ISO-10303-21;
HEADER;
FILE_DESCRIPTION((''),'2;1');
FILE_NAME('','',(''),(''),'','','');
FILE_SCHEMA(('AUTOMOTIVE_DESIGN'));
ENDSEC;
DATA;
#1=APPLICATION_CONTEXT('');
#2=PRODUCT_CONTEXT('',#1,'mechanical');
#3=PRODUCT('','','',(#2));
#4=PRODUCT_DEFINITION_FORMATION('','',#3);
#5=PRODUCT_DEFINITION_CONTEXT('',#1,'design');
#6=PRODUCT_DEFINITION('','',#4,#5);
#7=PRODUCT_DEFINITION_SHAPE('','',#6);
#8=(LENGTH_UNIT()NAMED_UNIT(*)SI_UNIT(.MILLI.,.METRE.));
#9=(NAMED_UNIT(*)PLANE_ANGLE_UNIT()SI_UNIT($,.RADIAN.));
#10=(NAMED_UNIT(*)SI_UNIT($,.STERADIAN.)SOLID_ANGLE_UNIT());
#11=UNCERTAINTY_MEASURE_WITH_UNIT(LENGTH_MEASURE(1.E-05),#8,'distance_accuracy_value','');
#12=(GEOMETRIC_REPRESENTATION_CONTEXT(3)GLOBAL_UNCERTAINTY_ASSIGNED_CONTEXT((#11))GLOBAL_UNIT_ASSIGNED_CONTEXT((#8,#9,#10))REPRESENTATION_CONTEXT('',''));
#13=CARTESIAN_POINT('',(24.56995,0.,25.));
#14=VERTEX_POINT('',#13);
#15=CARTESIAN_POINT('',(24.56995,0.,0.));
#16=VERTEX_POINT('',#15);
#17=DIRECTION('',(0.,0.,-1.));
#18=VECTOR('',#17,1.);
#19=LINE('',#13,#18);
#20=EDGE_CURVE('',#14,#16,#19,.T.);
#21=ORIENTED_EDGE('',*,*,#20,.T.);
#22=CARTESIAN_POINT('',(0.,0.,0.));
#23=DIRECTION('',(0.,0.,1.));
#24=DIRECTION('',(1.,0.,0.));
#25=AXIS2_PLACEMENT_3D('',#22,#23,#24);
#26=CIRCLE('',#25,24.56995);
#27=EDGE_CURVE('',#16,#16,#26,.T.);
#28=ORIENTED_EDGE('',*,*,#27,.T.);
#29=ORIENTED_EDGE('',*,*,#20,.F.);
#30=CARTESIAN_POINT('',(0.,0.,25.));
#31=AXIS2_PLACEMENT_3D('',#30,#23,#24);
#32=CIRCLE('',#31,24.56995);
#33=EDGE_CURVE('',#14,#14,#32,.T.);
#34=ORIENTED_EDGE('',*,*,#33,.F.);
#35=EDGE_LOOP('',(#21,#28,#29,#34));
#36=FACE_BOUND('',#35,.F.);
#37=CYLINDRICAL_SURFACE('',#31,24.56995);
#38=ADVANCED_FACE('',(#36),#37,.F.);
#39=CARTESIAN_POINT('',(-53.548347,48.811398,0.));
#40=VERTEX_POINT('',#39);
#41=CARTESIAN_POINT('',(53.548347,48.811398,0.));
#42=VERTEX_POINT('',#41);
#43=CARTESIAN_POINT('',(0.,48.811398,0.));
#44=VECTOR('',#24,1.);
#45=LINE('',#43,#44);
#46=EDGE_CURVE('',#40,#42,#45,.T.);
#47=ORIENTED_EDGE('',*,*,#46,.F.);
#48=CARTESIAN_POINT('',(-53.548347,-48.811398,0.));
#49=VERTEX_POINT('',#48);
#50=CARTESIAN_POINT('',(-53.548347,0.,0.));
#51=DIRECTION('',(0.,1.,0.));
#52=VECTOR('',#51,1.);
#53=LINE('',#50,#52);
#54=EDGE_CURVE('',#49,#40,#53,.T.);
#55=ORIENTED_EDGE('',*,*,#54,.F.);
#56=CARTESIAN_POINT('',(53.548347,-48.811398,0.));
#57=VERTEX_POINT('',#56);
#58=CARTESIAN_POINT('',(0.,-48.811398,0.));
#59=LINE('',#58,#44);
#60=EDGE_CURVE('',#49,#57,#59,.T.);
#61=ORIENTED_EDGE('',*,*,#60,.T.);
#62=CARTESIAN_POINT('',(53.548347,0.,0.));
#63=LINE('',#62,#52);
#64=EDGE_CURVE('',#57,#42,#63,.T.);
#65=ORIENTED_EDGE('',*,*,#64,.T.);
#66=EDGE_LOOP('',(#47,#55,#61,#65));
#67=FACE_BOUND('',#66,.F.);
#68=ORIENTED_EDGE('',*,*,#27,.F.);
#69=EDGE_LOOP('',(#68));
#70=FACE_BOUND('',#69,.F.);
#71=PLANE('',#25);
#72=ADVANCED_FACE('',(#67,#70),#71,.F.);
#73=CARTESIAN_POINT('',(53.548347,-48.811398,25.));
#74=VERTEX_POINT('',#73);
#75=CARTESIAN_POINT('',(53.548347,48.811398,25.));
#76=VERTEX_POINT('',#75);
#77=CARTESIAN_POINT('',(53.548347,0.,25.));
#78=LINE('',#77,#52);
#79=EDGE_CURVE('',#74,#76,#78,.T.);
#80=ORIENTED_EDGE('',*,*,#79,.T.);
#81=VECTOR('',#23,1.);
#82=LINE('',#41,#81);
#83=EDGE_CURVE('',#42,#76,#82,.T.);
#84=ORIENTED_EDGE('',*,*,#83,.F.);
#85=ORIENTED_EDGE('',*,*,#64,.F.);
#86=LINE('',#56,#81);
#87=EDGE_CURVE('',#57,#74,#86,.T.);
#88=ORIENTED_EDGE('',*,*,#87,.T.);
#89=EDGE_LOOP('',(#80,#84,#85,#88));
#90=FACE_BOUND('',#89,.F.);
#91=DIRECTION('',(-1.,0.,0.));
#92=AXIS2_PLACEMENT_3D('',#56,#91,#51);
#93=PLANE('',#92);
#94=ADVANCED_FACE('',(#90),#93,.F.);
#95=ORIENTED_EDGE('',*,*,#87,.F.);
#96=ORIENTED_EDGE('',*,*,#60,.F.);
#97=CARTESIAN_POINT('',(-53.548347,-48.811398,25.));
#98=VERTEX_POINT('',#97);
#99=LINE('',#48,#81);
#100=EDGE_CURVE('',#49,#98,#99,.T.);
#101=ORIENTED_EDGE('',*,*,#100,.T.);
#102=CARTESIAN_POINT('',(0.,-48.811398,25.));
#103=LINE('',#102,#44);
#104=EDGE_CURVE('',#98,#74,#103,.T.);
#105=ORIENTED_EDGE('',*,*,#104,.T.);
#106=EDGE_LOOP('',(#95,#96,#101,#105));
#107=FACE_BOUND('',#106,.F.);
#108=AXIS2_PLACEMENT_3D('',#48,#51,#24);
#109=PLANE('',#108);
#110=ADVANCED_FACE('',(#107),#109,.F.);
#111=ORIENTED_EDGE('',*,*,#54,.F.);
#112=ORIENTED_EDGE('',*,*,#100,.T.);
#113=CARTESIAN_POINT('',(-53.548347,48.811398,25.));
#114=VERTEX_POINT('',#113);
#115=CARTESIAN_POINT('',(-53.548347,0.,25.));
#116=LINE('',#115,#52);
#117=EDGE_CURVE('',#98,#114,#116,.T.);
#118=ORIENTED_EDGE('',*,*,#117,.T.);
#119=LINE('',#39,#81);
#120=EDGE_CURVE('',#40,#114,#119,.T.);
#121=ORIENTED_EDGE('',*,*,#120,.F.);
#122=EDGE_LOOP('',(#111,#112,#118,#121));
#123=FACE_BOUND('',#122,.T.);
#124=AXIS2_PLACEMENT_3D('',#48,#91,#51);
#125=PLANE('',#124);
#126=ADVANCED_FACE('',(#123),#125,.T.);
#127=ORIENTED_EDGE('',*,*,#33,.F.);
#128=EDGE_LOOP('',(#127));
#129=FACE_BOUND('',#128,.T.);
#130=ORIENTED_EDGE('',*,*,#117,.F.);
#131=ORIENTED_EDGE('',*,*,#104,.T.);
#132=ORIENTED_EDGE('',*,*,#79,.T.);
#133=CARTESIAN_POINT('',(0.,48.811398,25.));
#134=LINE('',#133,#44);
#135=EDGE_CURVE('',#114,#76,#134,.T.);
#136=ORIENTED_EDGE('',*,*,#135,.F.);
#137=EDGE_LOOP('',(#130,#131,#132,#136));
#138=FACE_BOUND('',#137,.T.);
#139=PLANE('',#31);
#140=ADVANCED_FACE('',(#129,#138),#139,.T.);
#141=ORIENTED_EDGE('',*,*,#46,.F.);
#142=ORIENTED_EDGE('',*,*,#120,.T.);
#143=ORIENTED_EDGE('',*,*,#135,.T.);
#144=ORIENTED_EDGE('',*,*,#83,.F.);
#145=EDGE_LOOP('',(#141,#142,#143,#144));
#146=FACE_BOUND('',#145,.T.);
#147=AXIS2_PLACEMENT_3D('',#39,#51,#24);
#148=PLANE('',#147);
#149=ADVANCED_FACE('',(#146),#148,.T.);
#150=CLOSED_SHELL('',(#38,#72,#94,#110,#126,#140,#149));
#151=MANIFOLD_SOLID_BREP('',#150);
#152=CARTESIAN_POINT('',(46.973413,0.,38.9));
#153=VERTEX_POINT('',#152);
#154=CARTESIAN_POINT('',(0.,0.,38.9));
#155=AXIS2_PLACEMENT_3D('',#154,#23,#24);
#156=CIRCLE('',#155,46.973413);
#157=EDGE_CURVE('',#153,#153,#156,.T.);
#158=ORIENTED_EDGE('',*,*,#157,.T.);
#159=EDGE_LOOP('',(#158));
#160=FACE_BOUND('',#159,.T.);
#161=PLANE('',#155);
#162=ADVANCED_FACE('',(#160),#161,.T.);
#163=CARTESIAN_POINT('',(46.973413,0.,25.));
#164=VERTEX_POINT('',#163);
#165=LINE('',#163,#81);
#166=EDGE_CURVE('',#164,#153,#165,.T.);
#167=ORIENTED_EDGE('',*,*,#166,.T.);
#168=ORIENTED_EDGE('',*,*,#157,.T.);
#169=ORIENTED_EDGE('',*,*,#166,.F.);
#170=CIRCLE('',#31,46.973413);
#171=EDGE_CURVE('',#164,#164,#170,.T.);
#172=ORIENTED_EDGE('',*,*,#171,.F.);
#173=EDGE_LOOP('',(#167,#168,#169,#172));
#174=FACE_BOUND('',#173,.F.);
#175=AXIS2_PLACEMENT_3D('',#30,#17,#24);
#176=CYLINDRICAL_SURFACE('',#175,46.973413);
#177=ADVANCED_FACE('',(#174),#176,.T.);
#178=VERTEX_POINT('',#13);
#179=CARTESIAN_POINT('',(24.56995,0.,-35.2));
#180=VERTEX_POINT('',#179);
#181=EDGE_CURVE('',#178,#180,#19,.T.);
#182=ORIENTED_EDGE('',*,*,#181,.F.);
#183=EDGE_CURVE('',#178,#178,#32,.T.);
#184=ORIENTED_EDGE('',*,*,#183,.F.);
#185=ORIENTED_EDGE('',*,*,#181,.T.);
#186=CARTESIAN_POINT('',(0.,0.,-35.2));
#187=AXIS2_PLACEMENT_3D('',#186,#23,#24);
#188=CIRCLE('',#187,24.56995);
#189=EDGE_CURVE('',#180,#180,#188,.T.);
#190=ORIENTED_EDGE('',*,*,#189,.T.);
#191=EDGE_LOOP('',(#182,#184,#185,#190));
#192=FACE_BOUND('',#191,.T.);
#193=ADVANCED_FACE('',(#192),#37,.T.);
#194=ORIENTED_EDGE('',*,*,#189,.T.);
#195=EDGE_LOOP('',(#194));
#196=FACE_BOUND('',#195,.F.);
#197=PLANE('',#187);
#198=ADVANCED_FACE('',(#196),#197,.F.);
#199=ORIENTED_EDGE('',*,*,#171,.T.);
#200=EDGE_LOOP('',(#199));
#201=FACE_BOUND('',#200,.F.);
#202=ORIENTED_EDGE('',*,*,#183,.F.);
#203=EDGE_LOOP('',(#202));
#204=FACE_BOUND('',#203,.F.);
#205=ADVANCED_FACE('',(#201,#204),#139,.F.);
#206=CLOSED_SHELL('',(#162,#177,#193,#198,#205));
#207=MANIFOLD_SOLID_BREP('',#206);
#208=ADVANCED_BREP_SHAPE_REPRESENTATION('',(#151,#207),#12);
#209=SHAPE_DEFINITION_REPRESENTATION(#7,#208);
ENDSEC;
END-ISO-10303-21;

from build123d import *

# Parameters (mm, degrees)
F0_W     = 107.0966944098
F0_H     = 97.6227968931
F1_DEPTH = 25
F2_R     = 24.5699498699
F3_DEPTH = 25.001
F4_R     = 24.5699498699
F5_DEPTH = 60.2
F6_R     = 46.9734129042
F7_DEPTH = 13.9


with BuildPart() as f1:
    # F0 (on Top) → F1 (new body)
    with BuildSketch(Plane.XY):
        Rectangle(F0_W, F0_H)
    extrude(amount=F1_DEPTH)

    # F2 (on face) → F3 (cut, through all)
    with BuildSketch(Plane.XY.offset(25)):
        Circle(F2_R)
    extrude(amount=-F3_DEPTH, mode=Mode.SUBTRACT)


with BuildPart() as f5:
    # F4 (on face) → F5 (new body)
    with BuildSketch(Plane.XY.offset(25)):
        Circle(F4_R)
    extrude(amount=-F5_DEPTH)

    # F6 (on face) → F7 (join)
    with BuildSketch(Plane.XY.offset(25)):
        Circle(F6_R)
    extrude(amount=F7_DEPTH)


solid = Compound([f1.part, f5.part])
